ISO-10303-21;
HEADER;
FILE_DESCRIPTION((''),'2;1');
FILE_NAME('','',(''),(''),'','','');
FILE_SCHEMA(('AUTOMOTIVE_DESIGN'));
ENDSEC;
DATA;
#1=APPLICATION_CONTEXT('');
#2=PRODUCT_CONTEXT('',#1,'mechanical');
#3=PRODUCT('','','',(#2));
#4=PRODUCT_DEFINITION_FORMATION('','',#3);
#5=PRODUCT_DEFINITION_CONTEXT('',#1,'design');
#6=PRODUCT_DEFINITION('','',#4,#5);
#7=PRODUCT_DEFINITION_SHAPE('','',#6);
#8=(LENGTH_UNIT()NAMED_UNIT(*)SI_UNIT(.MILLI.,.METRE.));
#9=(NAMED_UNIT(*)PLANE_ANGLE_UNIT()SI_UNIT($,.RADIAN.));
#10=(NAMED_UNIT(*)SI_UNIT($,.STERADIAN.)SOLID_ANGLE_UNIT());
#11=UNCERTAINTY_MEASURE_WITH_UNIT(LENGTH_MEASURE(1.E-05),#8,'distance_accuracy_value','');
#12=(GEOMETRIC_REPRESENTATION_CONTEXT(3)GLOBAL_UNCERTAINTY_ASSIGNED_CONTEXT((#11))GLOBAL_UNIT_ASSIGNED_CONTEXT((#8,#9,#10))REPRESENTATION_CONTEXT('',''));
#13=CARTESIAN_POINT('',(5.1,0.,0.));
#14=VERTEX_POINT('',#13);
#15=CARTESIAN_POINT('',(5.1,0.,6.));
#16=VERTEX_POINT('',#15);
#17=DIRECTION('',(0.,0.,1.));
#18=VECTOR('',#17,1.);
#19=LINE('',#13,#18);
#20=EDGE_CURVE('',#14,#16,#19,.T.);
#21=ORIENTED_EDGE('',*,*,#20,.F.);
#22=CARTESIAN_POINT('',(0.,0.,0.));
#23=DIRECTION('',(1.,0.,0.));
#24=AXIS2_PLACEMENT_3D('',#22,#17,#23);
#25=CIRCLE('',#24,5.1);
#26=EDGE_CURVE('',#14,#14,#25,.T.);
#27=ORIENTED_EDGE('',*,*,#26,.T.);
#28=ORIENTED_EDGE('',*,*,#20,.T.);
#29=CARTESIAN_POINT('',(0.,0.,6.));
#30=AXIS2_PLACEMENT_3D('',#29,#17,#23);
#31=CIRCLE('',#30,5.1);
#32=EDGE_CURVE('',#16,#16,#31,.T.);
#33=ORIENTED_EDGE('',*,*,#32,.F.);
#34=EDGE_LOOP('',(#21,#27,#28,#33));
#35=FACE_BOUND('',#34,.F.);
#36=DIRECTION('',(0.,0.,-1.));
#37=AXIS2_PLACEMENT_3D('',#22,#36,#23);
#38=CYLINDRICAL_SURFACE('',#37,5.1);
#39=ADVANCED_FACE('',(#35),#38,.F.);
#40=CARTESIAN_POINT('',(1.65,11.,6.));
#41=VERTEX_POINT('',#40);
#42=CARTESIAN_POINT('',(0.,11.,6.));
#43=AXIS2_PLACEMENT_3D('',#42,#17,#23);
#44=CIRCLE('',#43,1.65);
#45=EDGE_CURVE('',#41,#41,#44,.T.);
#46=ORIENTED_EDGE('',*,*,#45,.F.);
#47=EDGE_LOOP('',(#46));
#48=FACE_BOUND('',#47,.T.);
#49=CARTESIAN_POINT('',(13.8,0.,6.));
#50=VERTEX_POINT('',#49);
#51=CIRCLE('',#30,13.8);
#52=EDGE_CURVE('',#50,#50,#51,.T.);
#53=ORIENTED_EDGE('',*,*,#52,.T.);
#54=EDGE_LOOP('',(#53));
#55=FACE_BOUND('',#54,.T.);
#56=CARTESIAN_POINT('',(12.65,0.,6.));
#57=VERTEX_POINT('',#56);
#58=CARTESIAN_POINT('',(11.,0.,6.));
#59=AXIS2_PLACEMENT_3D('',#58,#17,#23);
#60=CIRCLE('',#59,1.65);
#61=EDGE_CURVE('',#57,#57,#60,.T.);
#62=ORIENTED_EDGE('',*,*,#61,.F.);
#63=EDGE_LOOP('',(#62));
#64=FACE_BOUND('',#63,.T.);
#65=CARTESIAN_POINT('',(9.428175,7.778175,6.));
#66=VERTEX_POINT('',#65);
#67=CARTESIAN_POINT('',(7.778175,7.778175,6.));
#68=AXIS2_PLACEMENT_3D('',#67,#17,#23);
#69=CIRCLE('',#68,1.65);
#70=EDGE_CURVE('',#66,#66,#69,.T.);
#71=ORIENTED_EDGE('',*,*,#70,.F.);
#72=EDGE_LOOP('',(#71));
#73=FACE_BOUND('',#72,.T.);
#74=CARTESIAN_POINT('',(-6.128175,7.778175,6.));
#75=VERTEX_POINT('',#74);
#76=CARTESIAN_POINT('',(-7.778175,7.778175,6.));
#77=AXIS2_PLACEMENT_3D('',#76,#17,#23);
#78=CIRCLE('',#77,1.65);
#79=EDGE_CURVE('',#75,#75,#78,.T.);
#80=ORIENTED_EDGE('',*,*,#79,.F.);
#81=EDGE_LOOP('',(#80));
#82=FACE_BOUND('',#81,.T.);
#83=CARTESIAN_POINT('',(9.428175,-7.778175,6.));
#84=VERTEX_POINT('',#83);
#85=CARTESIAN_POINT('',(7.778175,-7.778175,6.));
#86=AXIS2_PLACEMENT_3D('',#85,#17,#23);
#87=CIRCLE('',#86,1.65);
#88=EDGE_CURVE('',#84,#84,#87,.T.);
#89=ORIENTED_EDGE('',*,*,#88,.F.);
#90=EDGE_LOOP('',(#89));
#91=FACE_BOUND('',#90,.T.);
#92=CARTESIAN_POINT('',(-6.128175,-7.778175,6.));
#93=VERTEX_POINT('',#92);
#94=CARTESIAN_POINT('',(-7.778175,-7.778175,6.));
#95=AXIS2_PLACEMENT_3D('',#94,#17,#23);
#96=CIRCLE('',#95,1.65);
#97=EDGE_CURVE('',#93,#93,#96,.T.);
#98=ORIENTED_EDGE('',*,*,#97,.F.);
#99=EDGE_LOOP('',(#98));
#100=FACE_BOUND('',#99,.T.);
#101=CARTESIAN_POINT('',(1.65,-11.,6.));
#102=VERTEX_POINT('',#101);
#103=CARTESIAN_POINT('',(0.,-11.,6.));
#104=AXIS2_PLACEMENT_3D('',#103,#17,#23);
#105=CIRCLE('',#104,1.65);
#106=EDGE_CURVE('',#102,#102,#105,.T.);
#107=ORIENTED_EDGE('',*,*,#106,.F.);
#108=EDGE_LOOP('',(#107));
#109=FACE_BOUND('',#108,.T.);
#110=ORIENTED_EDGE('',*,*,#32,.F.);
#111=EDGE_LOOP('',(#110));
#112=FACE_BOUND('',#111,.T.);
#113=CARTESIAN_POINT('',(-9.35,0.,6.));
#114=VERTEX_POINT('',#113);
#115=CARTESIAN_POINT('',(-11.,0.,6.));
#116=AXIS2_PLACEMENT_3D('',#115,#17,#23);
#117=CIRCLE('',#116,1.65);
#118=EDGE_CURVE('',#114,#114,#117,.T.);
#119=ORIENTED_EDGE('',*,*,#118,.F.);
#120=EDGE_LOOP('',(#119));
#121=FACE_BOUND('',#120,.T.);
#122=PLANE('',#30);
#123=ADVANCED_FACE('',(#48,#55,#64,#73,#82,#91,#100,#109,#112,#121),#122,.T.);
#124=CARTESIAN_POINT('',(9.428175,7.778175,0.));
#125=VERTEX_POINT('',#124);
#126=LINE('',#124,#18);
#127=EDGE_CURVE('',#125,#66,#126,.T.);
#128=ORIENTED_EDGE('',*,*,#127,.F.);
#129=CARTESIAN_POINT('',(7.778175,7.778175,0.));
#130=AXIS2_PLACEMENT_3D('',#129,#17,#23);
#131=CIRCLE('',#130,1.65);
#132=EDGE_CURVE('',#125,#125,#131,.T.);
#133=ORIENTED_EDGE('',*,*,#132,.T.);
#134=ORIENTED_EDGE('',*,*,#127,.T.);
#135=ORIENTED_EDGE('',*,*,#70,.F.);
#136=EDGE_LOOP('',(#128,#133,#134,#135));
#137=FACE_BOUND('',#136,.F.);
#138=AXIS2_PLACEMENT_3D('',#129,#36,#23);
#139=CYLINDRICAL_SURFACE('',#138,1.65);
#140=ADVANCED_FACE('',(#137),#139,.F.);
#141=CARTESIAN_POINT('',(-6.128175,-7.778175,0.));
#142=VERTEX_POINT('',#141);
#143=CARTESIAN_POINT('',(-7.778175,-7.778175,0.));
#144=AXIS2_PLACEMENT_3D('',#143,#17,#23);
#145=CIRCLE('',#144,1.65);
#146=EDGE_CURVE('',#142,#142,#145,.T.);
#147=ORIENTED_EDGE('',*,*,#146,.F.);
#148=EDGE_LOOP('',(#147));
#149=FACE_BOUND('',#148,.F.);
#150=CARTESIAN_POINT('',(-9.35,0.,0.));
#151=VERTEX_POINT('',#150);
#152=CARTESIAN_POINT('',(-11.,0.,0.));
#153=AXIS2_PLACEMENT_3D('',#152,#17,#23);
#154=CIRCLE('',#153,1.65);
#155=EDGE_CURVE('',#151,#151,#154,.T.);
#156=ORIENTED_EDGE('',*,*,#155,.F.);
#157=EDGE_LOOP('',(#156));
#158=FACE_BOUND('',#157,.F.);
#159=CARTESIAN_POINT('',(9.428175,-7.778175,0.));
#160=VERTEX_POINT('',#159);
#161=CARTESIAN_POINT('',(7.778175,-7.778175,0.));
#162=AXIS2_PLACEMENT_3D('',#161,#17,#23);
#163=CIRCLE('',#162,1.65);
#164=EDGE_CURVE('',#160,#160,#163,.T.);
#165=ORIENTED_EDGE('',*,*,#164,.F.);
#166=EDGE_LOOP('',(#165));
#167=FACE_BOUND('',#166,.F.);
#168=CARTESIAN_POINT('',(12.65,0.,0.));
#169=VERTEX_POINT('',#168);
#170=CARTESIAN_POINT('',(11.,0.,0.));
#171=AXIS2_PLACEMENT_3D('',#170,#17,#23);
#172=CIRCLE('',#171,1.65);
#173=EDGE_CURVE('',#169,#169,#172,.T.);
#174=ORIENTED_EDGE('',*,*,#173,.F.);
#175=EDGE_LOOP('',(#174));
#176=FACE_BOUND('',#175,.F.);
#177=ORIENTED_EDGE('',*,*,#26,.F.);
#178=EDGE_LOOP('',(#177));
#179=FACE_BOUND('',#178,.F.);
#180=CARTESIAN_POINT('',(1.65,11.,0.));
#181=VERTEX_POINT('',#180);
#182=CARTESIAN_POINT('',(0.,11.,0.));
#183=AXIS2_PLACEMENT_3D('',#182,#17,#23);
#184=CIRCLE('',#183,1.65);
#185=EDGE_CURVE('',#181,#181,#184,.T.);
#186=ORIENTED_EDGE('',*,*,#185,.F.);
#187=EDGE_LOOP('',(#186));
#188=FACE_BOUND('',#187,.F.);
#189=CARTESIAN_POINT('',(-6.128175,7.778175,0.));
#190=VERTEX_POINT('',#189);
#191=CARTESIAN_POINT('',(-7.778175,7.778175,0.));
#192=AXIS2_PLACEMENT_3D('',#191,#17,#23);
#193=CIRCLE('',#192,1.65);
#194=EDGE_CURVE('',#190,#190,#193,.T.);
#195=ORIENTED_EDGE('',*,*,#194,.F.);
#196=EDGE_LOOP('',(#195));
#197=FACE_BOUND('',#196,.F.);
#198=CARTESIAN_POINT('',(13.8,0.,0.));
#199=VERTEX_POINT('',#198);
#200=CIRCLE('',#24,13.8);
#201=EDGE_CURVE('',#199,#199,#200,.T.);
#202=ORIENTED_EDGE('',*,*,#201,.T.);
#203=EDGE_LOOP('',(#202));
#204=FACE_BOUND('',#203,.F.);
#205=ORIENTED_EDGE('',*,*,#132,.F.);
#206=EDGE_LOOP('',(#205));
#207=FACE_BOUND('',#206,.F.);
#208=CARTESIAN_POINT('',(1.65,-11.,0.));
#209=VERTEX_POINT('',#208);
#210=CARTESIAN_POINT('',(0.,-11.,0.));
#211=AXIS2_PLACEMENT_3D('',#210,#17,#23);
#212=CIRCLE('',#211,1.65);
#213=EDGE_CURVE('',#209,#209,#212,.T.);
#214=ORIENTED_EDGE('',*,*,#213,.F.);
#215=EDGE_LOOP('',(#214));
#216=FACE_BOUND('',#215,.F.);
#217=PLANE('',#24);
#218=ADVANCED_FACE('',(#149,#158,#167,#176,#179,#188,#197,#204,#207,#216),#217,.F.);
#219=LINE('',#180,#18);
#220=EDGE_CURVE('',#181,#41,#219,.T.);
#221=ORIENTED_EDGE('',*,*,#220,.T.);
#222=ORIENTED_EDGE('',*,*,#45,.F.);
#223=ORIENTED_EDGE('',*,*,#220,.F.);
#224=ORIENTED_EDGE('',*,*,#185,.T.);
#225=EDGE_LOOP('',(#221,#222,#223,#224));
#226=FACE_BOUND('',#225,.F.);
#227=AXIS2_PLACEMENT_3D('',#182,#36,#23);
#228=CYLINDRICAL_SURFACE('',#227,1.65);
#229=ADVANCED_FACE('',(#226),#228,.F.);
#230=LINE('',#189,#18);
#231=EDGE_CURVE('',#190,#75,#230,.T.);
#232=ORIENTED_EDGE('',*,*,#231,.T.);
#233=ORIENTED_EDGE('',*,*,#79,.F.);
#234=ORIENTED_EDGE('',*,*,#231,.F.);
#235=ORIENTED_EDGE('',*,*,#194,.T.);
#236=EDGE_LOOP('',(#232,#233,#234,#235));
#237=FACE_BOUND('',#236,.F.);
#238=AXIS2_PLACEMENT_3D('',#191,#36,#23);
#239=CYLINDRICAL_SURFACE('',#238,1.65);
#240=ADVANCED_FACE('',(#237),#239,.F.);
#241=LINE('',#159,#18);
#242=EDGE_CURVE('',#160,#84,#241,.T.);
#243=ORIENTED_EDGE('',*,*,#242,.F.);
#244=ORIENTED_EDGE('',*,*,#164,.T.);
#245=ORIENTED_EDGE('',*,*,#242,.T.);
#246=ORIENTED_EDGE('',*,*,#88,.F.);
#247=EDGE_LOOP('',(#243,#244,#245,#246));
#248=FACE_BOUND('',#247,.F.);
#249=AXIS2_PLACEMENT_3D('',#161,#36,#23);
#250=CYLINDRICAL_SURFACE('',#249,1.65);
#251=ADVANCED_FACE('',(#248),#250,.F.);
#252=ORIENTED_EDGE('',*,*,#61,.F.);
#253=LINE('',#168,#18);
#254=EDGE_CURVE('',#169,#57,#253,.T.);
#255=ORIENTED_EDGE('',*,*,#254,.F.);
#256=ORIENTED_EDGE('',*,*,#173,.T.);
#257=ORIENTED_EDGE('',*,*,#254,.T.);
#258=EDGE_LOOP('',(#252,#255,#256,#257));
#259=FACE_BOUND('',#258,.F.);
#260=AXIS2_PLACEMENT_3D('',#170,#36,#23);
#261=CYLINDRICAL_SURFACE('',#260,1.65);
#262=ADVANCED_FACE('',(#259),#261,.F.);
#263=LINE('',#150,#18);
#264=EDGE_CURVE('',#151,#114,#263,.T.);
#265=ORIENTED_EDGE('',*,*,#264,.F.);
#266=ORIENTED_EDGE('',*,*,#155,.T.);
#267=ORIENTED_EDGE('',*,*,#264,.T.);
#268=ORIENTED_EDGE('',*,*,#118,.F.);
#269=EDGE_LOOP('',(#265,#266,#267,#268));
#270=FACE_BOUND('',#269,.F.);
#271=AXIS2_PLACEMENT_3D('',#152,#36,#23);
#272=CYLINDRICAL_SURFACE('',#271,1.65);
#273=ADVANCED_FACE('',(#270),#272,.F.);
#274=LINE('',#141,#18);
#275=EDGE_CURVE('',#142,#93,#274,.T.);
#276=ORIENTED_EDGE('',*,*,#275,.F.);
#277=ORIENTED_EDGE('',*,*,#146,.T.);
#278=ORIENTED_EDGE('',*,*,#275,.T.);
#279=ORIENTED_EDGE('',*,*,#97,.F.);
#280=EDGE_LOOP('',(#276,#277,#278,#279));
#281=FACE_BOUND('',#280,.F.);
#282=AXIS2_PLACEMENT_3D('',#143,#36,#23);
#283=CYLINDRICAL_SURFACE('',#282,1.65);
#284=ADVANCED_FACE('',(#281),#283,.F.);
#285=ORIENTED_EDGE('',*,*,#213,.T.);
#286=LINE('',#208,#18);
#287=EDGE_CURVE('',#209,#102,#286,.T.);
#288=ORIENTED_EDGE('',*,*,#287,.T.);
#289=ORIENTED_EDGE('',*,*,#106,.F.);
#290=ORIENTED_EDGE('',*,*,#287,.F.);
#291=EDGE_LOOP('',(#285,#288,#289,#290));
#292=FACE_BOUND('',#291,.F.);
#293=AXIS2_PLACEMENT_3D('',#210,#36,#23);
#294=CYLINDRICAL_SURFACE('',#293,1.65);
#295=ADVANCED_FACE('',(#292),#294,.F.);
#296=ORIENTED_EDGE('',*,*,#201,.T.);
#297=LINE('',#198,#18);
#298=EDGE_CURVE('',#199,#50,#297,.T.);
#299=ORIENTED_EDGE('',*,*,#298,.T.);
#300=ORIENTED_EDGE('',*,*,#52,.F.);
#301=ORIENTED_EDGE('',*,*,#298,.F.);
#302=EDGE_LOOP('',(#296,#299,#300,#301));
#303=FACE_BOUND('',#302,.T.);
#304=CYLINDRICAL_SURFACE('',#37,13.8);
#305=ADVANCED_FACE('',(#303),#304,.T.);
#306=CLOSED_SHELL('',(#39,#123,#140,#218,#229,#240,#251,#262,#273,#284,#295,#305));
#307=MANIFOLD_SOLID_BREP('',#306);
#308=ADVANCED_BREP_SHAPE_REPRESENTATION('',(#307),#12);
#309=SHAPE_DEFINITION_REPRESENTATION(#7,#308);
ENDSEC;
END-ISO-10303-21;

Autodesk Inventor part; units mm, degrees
ref_plane "YZ Plane" through (0, 0, 0) normal (1, 0, 0) x (0, 1, 0)
ref_plane "XZ Plane" through (0, 0, 0) normal (0, 1, 0) x (-1, 0, 0)
ref_plane "XY Plane" through (0, 0, 0) normal (0, 0, 1) x (1, 0, 0)
ref_plane "작업 평면1" through (0, 0, 0) normal (0, 0, 1) x (1, 0, 0)
sketch "스케치1" plane through (0, 0, 0) normal (0, 0, 1) x (1, 0, 0)
  circle A0 centre (-7.778175, -7.778175) radius 1.55
  circle A1 centre (7.778175, -7.778175) radius 1.55
  circle A2 centre (7.778175, 7.778175) radius 1.55
  circle A3 centre (-7.778175, 7.778175) radius 1.55
  circle A4 centre (0, 0) radius 5
  circle A5 centre (0, 0) radius 13.9
  circle A6 centre (0, 11) radius 1.55
  circle A7 centre (11, 0) radius 1.55
  circle A8 centre (0, -11) radius 1.55
  circle A9 centre (-11, 0) radius 1.55
  circle A10 centre (-11, 0) radius 1.65
  circle A11 centre (-7.778175, 7.778175) radius 1.65
  circle A12 centre (0, 11) radius 1.65
  circle A13 centre (7.778175, 7.778175) radius 1.65
  circle A14 centre (11, 0) radius 1.65
  circle A15 centre (7.778175, -7.778175) radius 1.65
  circle A16 centre (0, -11) radius 1.65
  circle A17 centre (-7.778175, -7.778175) radius 1.65
  circle A18 centre (0, 0) radius 5.1
  circle A19 centre (0, 0) radius 13.8
  point P0 (0, 0)
  dimension "d0" = 0.1
  dimension "d1" = 0.1
  dimension "d2" = 0.1
  dimension "d3" = 0.1
  dimension "d4" = 0.1
  dimension "d5" = 0.1
  dimension "d6" = 0.1
  dimension "d7" = 0.1
  dimension "d8" = 0.1
  dimension "d9" = 0.1
sketch "스케치1 outline for 돌출1" plane through (0, 0, 0) normal (0, 0, 1) x (1, 0, 0)
  circle A0 centre (0, 0) radius 13.8
  circle A1 centre (-7.778175, -7.778175) radius 1.65
  circle A2 centre (-11, 0) radius 1.65
  circle A3 centre (0, -11) radius 1.65
  circle A4 centre (7.778175, -7.778175) radius 1.65
  circle A5 centre (0, 0) radius 5.1
  circle A6 centre (11, 0) radius 1.65
  circle A7 centre (-7.778175, 7.778175) radius 1.65
  circle A8 centre (0, 11) radius 1.65
  circle A9 centre (7.778175, 7.778175) radius 1.65
extrude "돌출1" add sketch "스케치1 outline for 돌출1" along normal blind 6
properties part number "25" material "아크릴, 선명"
